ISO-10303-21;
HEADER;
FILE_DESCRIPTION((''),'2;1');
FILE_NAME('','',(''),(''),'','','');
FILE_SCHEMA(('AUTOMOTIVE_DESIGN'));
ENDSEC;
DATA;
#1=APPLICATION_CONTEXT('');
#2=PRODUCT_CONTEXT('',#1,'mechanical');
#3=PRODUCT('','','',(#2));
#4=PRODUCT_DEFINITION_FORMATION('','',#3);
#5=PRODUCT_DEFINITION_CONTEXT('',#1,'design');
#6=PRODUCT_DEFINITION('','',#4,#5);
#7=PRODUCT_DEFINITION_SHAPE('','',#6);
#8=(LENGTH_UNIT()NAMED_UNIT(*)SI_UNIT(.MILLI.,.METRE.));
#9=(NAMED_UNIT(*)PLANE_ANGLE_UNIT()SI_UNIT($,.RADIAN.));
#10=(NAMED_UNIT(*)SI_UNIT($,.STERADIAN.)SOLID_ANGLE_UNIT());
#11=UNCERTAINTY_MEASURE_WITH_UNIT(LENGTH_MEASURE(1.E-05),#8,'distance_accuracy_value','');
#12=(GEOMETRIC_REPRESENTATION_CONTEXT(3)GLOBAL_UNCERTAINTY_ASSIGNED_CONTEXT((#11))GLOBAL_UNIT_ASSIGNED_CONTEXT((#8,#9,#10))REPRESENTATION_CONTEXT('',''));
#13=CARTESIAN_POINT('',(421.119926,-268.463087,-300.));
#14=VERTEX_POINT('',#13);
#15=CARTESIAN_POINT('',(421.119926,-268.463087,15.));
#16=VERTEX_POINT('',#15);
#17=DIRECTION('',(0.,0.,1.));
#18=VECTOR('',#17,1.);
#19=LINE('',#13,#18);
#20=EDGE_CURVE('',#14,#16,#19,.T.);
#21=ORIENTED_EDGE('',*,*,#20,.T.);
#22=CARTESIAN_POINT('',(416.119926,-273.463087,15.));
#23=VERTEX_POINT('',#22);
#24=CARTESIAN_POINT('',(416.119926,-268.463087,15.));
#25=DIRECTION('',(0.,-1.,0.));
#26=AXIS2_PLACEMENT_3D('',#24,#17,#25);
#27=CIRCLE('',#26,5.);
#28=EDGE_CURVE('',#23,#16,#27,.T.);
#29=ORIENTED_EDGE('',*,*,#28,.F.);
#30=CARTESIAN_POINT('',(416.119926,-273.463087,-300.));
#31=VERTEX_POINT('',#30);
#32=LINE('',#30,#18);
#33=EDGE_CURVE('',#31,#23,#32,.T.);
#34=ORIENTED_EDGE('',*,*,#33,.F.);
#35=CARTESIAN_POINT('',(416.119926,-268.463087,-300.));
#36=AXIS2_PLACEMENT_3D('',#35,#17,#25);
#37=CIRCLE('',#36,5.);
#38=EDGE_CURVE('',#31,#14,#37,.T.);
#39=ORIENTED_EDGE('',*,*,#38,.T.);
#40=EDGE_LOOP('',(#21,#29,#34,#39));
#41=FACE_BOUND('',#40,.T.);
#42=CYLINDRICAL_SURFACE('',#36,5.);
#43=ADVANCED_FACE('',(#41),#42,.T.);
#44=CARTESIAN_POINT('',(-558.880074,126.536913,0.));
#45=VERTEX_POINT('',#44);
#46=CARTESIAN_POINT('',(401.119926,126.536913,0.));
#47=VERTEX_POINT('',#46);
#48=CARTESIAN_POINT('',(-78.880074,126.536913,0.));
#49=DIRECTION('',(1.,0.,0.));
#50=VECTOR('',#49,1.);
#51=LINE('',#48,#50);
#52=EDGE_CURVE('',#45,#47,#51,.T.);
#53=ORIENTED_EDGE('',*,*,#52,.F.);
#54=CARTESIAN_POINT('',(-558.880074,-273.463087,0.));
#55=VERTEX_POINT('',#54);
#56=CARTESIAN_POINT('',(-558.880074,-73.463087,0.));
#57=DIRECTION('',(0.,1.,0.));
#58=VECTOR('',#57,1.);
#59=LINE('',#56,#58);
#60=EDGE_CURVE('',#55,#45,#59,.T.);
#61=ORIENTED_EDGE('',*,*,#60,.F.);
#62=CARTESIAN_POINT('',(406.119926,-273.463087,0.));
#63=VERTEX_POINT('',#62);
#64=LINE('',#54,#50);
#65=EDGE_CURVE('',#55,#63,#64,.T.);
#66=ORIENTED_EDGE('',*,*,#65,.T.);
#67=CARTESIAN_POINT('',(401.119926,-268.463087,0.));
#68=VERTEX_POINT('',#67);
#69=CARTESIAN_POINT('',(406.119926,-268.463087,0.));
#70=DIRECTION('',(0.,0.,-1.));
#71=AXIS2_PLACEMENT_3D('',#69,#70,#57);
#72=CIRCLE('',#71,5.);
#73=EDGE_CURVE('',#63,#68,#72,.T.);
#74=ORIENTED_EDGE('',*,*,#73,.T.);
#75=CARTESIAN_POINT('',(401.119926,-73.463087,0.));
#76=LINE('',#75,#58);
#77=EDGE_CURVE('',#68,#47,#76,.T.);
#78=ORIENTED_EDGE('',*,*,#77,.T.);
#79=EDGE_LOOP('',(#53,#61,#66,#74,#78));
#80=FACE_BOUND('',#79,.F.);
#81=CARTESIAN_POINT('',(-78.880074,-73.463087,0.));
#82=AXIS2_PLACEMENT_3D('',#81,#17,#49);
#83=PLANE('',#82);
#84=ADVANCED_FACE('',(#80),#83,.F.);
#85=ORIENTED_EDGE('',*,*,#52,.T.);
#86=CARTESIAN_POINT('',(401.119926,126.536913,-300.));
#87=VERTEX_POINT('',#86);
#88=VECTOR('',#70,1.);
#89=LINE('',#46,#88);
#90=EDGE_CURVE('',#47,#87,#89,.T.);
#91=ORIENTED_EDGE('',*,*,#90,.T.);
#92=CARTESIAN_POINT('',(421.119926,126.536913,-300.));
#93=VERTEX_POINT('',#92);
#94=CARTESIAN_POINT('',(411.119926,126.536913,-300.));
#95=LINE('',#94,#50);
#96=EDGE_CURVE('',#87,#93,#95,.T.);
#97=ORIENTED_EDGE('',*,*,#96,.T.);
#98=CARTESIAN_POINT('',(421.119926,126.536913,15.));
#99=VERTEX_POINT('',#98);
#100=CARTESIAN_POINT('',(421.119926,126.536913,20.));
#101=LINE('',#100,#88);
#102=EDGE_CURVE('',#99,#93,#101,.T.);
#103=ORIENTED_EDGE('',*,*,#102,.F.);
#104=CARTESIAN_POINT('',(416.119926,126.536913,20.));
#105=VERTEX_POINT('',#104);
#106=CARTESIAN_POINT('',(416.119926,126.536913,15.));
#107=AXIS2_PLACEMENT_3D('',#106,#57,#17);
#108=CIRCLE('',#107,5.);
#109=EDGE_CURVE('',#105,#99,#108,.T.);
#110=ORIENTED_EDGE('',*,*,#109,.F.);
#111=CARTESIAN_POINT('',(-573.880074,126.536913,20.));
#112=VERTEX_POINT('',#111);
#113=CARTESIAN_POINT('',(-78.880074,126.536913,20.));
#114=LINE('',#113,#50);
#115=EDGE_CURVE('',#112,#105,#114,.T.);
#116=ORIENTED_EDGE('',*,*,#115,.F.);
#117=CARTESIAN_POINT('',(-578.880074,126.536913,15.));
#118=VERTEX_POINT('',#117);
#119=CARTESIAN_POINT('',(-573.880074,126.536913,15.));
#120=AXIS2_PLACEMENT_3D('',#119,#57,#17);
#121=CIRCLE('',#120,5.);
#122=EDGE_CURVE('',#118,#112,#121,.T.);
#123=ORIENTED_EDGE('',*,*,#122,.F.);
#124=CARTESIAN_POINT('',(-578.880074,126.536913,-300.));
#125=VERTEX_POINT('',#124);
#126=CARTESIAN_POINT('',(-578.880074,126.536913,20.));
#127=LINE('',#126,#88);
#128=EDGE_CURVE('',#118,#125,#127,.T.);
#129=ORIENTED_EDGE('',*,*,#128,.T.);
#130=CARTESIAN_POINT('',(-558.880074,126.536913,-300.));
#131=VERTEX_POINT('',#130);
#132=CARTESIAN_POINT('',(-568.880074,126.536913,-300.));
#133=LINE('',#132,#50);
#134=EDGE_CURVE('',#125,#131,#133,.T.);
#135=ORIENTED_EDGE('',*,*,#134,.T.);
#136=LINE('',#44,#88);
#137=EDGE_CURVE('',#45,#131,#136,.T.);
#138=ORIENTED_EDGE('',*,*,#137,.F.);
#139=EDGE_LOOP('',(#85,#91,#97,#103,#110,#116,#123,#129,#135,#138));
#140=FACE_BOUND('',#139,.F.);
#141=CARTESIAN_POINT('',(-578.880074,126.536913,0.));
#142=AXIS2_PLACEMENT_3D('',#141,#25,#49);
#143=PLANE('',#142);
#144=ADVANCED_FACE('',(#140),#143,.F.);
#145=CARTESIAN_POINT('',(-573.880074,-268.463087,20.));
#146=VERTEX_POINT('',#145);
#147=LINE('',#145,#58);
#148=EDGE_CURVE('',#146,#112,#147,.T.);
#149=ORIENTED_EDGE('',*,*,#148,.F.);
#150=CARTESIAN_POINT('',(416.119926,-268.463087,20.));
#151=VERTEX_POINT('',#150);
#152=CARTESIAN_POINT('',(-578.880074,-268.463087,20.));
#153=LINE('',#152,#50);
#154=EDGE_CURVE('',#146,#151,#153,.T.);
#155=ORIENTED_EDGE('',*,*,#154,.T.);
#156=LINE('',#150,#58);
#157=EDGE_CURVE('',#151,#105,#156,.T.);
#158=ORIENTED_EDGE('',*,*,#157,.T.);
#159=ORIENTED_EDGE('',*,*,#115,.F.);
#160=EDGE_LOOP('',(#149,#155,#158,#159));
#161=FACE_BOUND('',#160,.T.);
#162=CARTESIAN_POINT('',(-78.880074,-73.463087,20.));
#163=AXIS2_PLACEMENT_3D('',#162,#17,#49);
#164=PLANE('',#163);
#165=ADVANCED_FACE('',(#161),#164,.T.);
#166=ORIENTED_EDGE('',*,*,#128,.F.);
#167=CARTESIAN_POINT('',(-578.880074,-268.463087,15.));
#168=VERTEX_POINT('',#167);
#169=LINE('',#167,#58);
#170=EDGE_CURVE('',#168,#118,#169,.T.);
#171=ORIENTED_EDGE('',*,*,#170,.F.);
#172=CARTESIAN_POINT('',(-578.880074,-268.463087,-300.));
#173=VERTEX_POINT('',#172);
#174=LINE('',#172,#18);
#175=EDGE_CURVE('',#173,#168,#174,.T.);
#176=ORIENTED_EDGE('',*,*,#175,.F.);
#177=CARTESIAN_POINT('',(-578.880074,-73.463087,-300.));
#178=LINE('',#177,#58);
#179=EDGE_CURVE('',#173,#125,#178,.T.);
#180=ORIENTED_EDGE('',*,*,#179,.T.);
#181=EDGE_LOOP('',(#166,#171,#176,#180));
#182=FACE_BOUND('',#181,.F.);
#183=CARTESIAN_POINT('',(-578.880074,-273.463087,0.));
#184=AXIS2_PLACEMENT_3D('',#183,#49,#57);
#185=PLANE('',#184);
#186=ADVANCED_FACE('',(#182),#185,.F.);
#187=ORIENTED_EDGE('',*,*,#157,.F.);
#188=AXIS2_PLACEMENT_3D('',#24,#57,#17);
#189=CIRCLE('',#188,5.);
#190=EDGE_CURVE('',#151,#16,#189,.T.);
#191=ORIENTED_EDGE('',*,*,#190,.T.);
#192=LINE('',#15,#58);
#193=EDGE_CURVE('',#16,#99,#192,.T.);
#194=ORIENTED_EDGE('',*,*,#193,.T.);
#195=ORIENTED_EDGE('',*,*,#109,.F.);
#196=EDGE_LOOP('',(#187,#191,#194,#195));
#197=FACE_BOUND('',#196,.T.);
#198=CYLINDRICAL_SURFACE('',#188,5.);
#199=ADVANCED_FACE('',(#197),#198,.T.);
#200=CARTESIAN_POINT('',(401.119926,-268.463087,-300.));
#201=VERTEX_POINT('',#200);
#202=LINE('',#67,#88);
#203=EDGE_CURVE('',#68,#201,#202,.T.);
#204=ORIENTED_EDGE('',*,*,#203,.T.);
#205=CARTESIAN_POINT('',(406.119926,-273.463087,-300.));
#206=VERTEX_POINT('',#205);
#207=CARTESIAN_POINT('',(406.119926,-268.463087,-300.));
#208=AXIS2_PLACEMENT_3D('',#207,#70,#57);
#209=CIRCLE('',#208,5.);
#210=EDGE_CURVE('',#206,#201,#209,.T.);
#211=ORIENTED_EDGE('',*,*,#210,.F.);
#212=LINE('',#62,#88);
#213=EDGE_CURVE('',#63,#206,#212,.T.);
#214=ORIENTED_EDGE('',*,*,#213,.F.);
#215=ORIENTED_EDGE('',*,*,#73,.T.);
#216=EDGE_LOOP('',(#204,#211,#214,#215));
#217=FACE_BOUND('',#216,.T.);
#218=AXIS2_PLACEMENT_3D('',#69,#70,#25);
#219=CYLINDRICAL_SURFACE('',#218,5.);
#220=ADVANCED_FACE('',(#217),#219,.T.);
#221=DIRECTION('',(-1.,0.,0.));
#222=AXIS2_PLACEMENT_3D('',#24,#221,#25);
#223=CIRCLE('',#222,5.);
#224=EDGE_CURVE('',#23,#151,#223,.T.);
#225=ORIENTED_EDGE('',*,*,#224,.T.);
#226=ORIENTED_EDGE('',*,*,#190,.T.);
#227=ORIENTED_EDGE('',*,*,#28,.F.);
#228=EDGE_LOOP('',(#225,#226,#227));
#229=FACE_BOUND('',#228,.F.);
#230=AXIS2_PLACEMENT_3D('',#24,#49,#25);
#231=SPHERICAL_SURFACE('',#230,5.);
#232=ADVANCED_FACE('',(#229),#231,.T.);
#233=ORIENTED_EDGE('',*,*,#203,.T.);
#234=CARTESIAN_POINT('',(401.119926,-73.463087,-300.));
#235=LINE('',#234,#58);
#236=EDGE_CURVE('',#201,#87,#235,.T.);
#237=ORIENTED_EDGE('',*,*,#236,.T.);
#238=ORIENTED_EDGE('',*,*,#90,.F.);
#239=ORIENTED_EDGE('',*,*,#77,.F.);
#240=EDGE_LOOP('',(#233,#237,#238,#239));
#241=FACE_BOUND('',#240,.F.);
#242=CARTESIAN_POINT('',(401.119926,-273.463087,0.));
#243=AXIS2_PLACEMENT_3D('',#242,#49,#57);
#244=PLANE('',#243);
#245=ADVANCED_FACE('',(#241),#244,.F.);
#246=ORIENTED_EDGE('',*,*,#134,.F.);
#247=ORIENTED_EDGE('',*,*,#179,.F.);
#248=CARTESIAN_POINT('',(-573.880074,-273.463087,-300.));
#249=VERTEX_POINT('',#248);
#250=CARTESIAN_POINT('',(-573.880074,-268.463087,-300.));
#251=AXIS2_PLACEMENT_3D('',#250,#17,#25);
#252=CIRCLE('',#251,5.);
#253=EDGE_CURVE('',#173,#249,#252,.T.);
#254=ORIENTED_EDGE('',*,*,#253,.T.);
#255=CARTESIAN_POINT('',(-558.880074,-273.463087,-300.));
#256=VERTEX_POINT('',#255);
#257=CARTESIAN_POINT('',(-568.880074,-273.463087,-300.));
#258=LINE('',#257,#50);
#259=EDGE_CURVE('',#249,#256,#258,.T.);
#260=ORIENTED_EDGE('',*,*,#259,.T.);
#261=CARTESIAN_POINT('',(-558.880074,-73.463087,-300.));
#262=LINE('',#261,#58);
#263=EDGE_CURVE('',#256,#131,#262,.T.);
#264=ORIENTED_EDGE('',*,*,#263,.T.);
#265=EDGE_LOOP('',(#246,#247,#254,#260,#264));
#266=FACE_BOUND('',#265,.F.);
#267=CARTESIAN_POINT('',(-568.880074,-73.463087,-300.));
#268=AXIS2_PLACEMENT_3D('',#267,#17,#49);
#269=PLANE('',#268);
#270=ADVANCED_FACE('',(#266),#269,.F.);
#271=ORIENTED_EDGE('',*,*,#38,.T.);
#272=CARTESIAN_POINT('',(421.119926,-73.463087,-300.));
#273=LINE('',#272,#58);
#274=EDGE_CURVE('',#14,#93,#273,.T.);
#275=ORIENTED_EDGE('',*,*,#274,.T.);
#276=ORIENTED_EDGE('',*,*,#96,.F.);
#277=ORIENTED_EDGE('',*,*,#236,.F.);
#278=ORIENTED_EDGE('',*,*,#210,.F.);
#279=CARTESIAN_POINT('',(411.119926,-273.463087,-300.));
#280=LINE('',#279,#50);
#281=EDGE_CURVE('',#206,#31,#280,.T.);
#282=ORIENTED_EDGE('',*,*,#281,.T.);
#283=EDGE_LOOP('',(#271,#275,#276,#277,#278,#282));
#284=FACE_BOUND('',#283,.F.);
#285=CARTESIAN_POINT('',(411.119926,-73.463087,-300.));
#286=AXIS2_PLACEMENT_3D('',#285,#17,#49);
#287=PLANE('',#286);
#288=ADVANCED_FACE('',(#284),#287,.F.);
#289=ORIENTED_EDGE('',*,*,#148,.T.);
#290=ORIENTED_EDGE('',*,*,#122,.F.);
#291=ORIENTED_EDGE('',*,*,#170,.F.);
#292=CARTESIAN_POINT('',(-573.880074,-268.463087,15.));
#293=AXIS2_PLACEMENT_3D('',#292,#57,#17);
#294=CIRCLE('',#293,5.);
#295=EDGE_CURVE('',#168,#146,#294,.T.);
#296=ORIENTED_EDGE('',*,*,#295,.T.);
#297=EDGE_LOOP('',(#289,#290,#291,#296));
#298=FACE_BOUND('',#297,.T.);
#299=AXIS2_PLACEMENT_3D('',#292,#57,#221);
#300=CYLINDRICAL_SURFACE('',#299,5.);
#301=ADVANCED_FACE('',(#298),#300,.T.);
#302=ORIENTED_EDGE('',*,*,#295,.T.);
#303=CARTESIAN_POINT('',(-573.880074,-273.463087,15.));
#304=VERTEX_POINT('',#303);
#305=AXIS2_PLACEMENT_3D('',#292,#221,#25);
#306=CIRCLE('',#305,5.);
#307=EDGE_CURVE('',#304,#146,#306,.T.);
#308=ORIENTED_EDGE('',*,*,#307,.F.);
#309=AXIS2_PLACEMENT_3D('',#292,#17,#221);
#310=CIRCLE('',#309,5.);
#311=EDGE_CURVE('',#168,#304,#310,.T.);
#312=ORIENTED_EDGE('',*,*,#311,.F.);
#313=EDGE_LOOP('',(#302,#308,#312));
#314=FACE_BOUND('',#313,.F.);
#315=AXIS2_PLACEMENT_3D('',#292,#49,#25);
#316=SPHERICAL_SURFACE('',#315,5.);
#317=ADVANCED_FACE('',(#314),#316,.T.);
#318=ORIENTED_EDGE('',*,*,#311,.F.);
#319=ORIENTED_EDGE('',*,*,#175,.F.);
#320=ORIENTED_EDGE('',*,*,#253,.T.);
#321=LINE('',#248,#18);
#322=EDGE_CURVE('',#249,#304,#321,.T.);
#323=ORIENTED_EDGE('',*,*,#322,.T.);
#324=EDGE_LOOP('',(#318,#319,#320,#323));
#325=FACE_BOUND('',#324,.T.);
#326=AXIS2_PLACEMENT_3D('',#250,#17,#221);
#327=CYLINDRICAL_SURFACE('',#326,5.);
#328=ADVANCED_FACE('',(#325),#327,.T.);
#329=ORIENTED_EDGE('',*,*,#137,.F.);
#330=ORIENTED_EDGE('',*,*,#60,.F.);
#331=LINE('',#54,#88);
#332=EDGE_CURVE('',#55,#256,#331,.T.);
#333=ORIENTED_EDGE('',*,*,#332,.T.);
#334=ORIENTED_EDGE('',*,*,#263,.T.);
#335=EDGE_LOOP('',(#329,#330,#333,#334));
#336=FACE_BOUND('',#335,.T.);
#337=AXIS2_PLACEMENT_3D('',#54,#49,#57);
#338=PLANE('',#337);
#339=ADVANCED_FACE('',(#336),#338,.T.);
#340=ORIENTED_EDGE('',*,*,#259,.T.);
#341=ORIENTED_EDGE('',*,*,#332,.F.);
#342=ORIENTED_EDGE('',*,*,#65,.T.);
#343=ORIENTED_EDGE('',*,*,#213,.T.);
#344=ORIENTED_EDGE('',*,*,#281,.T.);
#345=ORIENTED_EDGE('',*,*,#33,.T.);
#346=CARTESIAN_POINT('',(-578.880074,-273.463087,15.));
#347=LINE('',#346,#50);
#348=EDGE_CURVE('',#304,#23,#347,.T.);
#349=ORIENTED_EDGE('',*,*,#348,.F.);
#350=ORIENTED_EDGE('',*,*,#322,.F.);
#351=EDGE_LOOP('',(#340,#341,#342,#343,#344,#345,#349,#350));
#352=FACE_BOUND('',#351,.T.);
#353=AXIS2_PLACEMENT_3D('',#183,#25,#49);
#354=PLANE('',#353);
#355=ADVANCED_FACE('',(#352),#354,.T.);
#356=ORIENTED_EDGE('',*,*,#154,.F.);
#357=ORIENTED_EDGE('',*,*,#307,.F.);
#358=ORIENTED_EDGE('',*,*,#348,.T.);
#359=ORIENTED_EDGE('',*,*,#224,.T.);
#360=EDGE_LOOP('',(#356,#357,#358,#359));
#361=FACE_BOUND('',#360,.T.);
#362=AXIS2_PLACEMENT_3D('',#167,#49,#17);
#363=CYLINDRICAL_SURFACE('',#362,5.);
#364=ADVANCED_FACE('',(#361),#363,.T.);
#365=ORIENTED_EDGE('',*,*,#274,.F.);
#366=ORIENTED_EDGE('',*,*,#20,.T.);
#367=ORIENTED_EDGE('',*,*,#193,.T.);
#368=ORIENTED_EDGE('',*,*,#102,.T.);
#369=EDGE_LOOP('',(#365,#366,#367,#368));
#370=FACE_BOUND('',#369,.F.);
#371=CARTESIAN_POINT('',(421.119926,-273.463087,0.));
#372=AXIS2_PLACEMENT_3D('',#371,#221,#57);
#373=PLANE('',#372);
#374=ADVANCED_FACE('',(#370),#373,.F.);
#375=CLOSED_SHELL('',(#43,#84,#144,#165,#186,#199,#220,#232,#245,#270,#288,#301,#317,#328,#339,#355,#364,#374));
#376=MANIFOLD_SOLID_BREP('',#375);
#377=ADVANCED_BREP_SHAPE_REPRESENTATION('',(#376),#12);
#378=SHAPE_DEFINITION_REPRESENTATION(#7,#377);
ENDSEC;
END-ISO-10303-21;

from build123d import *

# Parameters (mm, degrees)
F0_W     = 1000
F0_H     = 400
F1_DEPTH = 20
F2_W     = 20
F2_H     = 400
F3_DEPTH = 300
F4_R     = 5
F5_R     = 5
F6_R     = 5


with BuildPart() as f1:
    # F0 (on Top) → F1 (new body)
    with BuildSketch(Plane.XY):
        with Locations((-78.8800735027, -73.4630868891)):
            Rectangle(F0_W, F0_H)
    extrude(amount=F1_DEPTH)

    # F2 (on face) → F3 (join)
    with BuildSketch(Plane.XY):
        with Locations((-568.8800735027, -73.4630868891)):
            Rectangle(F2_W, F2_H)
        with Locations((411.1199264973, -73.4630868891)):
            Rectangle(F2_W, F2_H)
    extrude(amount=-F3_DEPTH)

    # F4
    f4_edges = [f1.edges().sort_by_distance(p)[0] for p in [
        (-78.880074, -273.463087, 20),
    ]]
    fillet(f4_edges, radius=F4_R)

    # F5
    f5_edges = [f1.edges().sort_by_distance(p)[0] for p in [
        (421.119926, -70.963087, 20),
    ]]
    fillet(f5_edges, radius=F5_R)

    # F6
    f6_edges = [f1.edges().sort_by_distance(p)[0] for p in [
        (401.119926, -273.463087, -150),
        (-578.880074, -70.963087, 20),
    ]]
    fillet(f6_edges, radius=F6_R)


solid = f1.part
